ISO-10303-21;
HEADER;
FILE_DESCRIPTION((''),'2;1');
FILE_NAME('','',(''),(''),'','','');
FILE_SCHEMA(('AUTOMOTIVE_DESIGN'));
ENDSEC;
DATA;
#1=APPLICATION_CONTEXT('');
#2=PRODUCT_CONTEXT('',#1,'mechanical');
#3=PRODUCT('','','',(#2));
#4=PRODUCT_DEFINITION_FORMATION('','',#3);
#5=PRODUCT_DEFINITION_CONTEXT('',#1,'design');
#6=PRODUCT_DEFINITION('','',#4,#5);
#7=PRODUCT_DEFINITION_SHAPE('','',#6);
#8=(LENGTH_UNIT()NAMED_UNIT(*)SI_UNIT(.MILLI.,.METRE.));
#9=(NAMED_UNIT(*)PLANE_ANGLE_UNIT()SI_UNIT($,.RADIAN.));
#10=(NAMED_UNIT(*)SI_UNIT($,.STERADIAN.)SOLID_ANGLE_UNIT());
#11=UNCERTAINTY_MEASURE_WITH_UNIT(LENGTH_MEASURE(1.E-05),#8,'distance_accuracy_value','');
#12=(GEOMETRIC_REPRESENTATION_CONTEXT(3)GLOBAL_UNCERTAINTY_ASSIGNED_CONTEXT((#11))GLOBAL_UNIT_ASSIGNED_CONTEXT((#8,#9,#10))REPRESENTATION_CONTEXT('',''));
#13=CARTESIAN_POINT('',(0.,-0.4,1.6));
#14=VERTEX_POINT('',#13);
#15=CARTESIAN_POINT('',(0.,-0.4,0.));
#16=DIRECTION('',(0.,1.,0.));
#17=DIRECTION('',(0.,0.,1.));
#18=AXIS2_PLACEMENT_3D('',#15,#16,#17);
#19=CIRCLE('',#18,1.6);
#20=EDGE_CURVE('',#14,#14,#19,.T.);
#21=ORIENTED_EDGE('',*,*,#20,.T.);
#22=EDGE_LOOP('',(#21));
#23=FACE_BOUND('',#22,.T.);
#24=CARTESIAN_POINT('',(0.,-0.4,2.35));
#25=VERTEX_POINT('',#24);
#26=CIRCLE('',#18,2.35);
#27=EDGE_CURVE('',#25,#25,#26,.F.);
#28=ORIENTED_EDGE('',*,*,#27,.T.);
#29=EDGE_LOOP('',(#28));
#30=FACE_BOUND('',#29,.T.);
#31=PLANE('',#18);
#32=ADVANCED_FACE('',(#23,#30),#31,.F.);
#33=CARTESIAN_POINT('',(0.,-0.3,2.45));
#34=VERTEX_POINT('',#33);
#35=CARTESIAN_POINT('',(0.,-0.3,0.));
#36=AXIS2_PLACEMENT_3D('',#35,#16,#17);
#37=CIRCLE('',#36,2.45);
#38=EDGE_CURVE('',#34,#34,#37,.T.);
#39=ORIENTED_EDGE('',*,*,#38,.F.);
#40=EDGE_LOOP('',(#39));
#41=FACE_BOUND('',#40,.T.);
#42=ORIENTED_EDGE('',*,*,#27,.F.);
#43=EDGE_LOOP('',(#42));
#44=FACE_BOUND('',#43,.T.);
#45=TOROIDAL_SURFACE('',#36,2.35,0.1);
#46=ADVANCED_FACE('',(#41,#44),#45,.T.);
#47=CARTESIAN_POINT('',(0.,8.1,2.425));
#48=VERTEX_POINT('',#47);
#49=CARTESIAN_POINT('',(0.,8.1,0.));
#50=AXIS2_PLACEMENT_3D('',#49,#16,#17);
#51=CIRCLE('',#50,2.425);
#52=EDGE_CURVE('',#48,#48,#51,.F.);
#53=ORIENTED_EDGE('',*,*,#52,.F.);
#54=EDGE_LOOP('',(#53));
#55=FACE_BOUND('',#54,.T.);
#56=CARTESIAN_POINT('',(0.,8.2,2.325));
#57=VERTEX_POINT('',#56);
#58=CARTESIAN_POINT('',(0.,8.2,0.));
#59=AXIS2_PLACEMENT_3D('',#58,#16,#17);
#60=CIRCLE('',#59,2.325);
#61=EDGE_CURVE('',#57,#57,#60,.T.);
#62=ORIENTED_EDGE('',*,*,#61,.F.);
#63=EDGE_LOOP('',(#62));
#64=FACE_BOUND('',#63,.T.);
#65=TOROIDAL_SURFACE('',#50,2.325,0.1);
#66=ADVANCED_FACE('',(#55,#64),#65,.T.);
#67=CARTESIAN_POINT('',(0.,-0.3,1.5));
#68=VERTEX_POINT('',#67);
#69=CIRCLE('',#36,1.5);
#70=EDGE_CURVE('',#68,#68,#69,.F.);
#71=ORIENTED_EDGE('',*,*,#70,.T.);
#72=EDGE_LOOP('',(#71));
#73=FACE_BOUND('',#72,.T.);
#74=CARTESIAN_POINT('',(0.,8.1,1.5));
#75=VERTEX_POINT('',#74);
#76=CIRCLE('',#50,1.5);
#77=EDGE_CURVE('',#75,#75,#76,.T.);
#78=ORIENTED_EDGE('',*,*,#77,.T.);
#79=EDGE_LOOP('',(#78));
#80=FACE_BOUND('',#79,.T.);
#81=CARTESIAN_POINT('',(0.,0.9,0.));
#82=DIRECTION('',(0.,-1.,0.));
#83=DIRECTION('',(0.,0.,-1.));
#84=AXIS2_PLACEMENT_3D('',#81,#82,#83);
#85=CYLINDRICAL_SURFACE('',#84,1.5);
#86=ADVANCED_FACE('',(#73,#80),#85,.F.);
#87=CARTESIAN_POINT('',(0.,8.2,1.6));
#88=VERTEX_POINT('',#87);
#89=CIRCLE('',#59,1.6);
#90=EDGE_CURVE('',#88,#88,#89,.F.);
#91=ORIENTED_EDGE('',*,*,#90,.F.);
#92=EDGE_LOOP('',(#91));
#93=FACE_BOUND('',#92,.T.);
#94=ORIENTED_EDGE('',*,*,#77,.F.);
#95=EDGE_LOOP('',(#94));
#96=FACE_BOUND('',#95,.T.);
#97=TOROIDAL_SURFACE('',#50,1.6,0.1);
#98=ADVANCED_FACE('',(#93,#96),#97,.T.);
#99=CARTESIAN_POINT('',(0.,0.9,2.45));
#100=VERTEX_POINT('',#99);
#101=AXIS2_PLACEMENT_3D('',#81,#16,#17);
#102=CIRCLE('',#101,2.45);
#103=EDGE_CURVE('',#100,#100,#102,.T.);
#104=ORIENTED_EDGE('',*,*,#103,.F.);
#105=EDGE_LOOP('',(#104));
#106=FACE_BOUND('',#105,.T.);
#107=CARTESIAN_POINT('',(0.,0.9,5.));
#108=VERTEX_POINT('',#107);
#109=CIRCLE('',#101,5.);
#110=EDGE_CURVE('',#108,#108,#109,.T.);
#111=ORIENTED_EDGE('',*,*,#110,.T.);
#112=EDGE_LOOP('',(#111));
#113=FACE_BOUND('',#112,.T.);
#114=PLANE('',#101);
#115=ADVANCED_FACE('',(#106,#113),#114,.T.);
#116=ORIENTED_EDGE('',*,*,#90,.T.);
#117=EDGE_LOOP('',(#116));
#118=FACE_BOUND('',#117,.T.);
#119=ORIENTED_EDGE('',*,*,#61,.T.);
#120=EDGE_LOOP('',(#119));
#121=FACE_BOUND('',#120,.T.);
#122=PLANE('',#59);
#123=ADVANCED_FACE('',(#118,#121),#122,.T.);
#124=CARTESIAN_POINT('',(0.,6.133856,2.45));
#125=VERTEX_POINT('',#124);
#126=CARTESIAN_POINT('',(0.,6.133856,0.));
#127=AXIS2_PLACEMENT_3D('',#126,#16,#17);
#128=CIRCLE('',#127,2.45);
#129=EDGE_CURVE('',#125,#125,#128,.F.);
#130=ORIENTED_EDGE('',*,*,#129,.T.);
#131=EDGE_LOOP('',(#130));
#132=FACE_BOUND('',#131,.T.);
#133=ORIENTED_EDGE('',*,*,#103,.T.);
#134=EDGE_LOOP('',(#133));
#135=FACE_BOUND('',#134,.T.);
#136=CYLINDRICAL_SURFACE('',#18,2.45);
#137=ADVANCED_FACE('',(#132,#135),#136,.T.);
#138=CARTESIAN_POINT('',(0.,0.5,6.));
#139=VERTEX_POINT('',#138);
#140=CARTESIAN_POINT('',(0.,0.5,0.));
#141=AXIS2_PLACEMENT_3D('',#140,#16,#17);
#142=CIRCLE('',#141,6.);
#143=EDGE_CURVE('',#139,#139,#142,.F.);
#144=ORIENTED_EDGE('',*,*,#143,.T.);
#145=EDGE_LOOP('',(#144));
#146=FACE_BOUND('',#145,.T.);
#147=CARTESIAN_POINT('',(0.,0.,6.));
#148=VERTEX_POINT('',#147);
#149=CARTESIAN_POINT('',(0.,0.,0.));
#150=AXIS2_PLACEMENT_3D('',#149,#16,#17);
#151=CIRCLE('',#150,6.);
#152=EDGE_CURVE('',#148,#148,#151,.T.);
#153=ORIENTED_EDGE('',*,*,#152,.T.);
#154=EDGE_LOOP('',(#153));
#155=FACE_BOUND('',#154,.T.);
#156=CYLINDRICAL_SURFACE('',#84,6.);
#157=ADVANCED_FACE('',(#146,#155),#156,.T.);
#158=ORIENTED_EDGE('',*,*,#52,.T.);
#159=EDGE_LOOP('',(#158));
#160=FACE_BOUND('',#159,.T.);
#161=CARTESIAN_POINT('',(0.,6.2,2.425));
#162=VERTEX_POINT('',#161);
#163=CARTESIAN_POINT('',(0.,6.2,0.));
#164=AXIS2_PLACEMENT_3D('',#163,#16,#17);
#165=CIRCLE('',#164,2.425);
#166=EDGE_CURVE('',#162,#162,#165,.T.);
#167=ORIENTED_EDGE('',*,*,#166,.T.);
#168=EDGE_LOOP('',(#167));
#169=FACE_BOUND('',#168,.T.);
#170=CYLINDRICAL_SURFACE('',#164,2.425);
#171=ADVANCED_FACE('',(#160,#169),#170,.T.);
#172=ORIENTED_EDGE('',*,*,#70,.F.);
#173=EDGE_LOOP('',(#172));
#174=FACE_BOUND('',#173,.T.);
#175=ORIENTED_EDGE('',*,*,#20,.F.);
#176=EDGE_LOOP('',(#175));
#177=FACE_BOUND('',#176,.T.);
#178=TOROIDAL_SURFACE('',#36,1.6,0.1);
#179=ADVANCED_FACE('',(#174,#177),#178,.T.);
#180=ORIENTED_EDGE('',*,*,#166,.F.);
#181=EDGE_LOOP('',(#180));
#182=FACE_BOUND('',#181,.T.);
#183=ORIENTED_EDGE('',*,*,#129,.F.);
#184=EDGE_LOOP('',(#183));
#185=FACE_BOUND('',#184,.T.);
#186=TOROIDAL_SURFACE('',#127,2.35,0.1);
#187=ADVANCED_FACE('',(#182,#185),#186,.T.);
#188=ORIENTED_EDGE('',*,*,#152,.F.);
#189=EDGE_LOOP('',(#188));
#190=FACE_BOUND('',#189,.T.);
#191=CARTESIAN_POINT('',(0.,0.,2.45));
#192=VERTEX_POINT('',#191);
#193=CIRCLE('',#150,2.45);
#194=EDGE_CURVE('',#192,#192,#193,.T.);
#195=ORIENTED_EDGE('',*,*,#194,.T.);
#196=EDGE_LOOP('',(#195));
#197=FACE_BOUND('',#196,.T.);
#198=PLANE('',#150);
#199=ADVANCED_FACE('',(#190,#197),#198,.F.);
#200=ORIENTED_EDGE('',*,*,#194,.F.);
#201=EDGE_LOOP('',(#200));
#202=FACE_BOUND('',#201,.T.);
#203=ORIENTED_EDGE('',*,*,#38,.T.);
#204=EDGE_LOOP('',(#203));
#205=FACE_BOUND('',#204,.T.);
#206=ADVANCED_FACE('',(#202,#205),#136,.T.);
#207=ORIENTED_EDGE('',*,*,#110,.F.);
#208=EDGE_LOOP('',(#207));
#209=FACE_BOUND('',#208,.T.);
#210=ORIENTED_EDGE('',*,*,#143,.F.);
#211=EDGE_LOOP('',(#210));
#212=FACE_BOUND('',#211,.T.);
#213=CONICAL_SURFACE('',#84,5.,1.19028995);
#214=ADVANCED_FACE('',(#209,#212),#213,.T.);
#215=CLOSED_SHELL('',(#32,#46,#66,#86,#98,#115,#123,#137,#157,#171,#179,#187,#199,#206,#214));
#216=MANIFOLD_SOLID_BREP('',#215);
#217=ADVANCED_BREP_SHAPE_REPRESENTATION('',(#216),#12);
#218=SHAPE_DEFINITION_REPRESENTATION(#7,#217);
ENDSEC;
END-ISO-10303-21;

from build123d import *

# Parameters (mm, degrees)
SKETCH_1_R           = 6
SKETCH_1_R_2         = 1.5
EXTRUDE_1_DEPTH      = 0.9
EXTRUDE_2_DEPTH      = 7.3
EXTRUDE_2_DEPTH_BACK = 1.3
SKETCH_2_R           = 2.45
SKETCH_2_R_2         = 1.5
SKETCH_3_OUTSIDE_W   = 17.806
SKETCH_3_OUTSIDE_H   = 17.806
SKETCH_3_OUTSIDE_R   = 2.425
SKETCH_3_OUTSIDE_R_2 = 1.5
CUT_EXTRUDE_1_DEPTH  = 2
FILLET_1_R           = 0.1
FILLET_2_R           = 0.1
CHAMFER_1_SIZE       = 0.4
CHAMFER_1_SIZE2      = 1


with BuildPart() as part:
    # 草图1 → 凸台-拉伸1 (new body)
    with BuildSketch(Plane(origin=(0, 0, 0), x_dir=(1, 0, 0), z_dir=(0, 1, 0))):
        with Locations(Location((0, 0, 0), (0, 0, 270))):
            Circle(SKETCH_1_R)
        with Locations(Location((0, 0, 0), (0, 0, 270))):
            Circle(SKETCH_1_R_2, mode=Mode.SUBTRACT)
    extrude(amount=EXTRUDE_1_DEPTH)

    # 草图2 → 凸台-拉伸2 (add, two sides: drawn at the far end of the back side and taken through both)
    with BuildSketch(Plane(origin=(0, 0.9, 0), x_dir=(1, 0, 0), z_dir=(0, 1, 0)).offset(-EXTRUDE_2_DEPTH_BACK)):
        with Locations(Location((0, 0, 0), (0, 0, 270))):
            Circle(SKETCH_2_R)
        with Locations(Location((0, 0, 0), (0, 0, 270))):
            Circle(SKETCH_2_R_2, mode=Mode.SUBTRACT)
    extrude(amount=EXTRUDE_2_DEPTH + EXTRUDE_2_DEPTH_BACK)

    # 草图3 outside → 切除-拉伸1 (cut)
    # profile 1 of 2: a face of its own
    with BuildSketch(Plane(origin=(0, 8.2, 0), x_dir=(1, 0, 0), z_dir=(0, 1, 0))):
        Rectangle(SKETCH_3_OUTSIDE_W, SKETCH_3_OUTSIDE_H)
        with Locations(Location((0, 0, 0), (0, 0, 270))):
            Circle(SKETCH_3_OUTSIDE_R, mode=Mode.SUBTRACT)
    # profile 2 of 2: a face of its own
    with BuildSketch(Plane(origin=(0, 8.2, 0), x_dir=(1, 0, 0), z_dir=(0, 1, 0))):
        with Locations(Location((0, 0, 0), (0, 0, 270))):
            Circle(SKETCH_3_OUTSIDE_R_2)
    extrude(amount=-CUT_EXTRUDE_1_DEPTH, mode=Mode.SUBTRACT)

    # 圆角1
    fillet_1_edges = [part.edges().sort_by_distance(p)[0] for p in [
        (0, -0.4, -2.45),
        (0, -0.4, -1.5),
        (0, 8.2, -1.5),
        (0, 8.2, -2.425),
    ]]
    fillet(fillet_1_edges, radius=FILLET_1_R)

    # 圆角2
    # the kernel refuses this fillet: 0.1 mm, written as the material it takes off along each edge
    with BuildSketch(Plane(origin=(0, 6.2, 0), x_dir=(0, 0, 1), z_dir=(1, 0, 0))) as fillet_2_piece_1:
        with BuildLine():
            CenterArc((2.35, 0.066143783), FILLET_2_R, 318.590377891, 41.409622109)
            Line((2.425, 0), (2.4265, -0.001322876))
            ThreePointArc((2.4265, -0.001322876), (2.4375, -0.002), (2.45, -0.002))
            Line((2.45, -0.002), (2.452, 0))
            Line((2.452, 0), (2.452, 0.066143783))
            Line((2.452, 0.066143783), (2.45, 0.066143783))
        make_face()
    revolve(axis=Axis((0, 6.2, 0), (0, -1, 0)), mode=Mode.SUBTRACT)

    # 倒角1
    chamfer_1_edges = [part.edges().sort_by_distance(p)[0] for p in [
        (0, 0.9, -6),
    ]]
    chamfer_1_side = [part.faces().sort_by_distance(p)[0] for p in [
        (0, 0.45, -6),
    ]]
    chamfer(chamfer_1_edges, length=CHAMFER_1_SIZE, length2=CHAMFER_1_SIZE2, reference=chamfer_1_side[0])


solid = part.part
